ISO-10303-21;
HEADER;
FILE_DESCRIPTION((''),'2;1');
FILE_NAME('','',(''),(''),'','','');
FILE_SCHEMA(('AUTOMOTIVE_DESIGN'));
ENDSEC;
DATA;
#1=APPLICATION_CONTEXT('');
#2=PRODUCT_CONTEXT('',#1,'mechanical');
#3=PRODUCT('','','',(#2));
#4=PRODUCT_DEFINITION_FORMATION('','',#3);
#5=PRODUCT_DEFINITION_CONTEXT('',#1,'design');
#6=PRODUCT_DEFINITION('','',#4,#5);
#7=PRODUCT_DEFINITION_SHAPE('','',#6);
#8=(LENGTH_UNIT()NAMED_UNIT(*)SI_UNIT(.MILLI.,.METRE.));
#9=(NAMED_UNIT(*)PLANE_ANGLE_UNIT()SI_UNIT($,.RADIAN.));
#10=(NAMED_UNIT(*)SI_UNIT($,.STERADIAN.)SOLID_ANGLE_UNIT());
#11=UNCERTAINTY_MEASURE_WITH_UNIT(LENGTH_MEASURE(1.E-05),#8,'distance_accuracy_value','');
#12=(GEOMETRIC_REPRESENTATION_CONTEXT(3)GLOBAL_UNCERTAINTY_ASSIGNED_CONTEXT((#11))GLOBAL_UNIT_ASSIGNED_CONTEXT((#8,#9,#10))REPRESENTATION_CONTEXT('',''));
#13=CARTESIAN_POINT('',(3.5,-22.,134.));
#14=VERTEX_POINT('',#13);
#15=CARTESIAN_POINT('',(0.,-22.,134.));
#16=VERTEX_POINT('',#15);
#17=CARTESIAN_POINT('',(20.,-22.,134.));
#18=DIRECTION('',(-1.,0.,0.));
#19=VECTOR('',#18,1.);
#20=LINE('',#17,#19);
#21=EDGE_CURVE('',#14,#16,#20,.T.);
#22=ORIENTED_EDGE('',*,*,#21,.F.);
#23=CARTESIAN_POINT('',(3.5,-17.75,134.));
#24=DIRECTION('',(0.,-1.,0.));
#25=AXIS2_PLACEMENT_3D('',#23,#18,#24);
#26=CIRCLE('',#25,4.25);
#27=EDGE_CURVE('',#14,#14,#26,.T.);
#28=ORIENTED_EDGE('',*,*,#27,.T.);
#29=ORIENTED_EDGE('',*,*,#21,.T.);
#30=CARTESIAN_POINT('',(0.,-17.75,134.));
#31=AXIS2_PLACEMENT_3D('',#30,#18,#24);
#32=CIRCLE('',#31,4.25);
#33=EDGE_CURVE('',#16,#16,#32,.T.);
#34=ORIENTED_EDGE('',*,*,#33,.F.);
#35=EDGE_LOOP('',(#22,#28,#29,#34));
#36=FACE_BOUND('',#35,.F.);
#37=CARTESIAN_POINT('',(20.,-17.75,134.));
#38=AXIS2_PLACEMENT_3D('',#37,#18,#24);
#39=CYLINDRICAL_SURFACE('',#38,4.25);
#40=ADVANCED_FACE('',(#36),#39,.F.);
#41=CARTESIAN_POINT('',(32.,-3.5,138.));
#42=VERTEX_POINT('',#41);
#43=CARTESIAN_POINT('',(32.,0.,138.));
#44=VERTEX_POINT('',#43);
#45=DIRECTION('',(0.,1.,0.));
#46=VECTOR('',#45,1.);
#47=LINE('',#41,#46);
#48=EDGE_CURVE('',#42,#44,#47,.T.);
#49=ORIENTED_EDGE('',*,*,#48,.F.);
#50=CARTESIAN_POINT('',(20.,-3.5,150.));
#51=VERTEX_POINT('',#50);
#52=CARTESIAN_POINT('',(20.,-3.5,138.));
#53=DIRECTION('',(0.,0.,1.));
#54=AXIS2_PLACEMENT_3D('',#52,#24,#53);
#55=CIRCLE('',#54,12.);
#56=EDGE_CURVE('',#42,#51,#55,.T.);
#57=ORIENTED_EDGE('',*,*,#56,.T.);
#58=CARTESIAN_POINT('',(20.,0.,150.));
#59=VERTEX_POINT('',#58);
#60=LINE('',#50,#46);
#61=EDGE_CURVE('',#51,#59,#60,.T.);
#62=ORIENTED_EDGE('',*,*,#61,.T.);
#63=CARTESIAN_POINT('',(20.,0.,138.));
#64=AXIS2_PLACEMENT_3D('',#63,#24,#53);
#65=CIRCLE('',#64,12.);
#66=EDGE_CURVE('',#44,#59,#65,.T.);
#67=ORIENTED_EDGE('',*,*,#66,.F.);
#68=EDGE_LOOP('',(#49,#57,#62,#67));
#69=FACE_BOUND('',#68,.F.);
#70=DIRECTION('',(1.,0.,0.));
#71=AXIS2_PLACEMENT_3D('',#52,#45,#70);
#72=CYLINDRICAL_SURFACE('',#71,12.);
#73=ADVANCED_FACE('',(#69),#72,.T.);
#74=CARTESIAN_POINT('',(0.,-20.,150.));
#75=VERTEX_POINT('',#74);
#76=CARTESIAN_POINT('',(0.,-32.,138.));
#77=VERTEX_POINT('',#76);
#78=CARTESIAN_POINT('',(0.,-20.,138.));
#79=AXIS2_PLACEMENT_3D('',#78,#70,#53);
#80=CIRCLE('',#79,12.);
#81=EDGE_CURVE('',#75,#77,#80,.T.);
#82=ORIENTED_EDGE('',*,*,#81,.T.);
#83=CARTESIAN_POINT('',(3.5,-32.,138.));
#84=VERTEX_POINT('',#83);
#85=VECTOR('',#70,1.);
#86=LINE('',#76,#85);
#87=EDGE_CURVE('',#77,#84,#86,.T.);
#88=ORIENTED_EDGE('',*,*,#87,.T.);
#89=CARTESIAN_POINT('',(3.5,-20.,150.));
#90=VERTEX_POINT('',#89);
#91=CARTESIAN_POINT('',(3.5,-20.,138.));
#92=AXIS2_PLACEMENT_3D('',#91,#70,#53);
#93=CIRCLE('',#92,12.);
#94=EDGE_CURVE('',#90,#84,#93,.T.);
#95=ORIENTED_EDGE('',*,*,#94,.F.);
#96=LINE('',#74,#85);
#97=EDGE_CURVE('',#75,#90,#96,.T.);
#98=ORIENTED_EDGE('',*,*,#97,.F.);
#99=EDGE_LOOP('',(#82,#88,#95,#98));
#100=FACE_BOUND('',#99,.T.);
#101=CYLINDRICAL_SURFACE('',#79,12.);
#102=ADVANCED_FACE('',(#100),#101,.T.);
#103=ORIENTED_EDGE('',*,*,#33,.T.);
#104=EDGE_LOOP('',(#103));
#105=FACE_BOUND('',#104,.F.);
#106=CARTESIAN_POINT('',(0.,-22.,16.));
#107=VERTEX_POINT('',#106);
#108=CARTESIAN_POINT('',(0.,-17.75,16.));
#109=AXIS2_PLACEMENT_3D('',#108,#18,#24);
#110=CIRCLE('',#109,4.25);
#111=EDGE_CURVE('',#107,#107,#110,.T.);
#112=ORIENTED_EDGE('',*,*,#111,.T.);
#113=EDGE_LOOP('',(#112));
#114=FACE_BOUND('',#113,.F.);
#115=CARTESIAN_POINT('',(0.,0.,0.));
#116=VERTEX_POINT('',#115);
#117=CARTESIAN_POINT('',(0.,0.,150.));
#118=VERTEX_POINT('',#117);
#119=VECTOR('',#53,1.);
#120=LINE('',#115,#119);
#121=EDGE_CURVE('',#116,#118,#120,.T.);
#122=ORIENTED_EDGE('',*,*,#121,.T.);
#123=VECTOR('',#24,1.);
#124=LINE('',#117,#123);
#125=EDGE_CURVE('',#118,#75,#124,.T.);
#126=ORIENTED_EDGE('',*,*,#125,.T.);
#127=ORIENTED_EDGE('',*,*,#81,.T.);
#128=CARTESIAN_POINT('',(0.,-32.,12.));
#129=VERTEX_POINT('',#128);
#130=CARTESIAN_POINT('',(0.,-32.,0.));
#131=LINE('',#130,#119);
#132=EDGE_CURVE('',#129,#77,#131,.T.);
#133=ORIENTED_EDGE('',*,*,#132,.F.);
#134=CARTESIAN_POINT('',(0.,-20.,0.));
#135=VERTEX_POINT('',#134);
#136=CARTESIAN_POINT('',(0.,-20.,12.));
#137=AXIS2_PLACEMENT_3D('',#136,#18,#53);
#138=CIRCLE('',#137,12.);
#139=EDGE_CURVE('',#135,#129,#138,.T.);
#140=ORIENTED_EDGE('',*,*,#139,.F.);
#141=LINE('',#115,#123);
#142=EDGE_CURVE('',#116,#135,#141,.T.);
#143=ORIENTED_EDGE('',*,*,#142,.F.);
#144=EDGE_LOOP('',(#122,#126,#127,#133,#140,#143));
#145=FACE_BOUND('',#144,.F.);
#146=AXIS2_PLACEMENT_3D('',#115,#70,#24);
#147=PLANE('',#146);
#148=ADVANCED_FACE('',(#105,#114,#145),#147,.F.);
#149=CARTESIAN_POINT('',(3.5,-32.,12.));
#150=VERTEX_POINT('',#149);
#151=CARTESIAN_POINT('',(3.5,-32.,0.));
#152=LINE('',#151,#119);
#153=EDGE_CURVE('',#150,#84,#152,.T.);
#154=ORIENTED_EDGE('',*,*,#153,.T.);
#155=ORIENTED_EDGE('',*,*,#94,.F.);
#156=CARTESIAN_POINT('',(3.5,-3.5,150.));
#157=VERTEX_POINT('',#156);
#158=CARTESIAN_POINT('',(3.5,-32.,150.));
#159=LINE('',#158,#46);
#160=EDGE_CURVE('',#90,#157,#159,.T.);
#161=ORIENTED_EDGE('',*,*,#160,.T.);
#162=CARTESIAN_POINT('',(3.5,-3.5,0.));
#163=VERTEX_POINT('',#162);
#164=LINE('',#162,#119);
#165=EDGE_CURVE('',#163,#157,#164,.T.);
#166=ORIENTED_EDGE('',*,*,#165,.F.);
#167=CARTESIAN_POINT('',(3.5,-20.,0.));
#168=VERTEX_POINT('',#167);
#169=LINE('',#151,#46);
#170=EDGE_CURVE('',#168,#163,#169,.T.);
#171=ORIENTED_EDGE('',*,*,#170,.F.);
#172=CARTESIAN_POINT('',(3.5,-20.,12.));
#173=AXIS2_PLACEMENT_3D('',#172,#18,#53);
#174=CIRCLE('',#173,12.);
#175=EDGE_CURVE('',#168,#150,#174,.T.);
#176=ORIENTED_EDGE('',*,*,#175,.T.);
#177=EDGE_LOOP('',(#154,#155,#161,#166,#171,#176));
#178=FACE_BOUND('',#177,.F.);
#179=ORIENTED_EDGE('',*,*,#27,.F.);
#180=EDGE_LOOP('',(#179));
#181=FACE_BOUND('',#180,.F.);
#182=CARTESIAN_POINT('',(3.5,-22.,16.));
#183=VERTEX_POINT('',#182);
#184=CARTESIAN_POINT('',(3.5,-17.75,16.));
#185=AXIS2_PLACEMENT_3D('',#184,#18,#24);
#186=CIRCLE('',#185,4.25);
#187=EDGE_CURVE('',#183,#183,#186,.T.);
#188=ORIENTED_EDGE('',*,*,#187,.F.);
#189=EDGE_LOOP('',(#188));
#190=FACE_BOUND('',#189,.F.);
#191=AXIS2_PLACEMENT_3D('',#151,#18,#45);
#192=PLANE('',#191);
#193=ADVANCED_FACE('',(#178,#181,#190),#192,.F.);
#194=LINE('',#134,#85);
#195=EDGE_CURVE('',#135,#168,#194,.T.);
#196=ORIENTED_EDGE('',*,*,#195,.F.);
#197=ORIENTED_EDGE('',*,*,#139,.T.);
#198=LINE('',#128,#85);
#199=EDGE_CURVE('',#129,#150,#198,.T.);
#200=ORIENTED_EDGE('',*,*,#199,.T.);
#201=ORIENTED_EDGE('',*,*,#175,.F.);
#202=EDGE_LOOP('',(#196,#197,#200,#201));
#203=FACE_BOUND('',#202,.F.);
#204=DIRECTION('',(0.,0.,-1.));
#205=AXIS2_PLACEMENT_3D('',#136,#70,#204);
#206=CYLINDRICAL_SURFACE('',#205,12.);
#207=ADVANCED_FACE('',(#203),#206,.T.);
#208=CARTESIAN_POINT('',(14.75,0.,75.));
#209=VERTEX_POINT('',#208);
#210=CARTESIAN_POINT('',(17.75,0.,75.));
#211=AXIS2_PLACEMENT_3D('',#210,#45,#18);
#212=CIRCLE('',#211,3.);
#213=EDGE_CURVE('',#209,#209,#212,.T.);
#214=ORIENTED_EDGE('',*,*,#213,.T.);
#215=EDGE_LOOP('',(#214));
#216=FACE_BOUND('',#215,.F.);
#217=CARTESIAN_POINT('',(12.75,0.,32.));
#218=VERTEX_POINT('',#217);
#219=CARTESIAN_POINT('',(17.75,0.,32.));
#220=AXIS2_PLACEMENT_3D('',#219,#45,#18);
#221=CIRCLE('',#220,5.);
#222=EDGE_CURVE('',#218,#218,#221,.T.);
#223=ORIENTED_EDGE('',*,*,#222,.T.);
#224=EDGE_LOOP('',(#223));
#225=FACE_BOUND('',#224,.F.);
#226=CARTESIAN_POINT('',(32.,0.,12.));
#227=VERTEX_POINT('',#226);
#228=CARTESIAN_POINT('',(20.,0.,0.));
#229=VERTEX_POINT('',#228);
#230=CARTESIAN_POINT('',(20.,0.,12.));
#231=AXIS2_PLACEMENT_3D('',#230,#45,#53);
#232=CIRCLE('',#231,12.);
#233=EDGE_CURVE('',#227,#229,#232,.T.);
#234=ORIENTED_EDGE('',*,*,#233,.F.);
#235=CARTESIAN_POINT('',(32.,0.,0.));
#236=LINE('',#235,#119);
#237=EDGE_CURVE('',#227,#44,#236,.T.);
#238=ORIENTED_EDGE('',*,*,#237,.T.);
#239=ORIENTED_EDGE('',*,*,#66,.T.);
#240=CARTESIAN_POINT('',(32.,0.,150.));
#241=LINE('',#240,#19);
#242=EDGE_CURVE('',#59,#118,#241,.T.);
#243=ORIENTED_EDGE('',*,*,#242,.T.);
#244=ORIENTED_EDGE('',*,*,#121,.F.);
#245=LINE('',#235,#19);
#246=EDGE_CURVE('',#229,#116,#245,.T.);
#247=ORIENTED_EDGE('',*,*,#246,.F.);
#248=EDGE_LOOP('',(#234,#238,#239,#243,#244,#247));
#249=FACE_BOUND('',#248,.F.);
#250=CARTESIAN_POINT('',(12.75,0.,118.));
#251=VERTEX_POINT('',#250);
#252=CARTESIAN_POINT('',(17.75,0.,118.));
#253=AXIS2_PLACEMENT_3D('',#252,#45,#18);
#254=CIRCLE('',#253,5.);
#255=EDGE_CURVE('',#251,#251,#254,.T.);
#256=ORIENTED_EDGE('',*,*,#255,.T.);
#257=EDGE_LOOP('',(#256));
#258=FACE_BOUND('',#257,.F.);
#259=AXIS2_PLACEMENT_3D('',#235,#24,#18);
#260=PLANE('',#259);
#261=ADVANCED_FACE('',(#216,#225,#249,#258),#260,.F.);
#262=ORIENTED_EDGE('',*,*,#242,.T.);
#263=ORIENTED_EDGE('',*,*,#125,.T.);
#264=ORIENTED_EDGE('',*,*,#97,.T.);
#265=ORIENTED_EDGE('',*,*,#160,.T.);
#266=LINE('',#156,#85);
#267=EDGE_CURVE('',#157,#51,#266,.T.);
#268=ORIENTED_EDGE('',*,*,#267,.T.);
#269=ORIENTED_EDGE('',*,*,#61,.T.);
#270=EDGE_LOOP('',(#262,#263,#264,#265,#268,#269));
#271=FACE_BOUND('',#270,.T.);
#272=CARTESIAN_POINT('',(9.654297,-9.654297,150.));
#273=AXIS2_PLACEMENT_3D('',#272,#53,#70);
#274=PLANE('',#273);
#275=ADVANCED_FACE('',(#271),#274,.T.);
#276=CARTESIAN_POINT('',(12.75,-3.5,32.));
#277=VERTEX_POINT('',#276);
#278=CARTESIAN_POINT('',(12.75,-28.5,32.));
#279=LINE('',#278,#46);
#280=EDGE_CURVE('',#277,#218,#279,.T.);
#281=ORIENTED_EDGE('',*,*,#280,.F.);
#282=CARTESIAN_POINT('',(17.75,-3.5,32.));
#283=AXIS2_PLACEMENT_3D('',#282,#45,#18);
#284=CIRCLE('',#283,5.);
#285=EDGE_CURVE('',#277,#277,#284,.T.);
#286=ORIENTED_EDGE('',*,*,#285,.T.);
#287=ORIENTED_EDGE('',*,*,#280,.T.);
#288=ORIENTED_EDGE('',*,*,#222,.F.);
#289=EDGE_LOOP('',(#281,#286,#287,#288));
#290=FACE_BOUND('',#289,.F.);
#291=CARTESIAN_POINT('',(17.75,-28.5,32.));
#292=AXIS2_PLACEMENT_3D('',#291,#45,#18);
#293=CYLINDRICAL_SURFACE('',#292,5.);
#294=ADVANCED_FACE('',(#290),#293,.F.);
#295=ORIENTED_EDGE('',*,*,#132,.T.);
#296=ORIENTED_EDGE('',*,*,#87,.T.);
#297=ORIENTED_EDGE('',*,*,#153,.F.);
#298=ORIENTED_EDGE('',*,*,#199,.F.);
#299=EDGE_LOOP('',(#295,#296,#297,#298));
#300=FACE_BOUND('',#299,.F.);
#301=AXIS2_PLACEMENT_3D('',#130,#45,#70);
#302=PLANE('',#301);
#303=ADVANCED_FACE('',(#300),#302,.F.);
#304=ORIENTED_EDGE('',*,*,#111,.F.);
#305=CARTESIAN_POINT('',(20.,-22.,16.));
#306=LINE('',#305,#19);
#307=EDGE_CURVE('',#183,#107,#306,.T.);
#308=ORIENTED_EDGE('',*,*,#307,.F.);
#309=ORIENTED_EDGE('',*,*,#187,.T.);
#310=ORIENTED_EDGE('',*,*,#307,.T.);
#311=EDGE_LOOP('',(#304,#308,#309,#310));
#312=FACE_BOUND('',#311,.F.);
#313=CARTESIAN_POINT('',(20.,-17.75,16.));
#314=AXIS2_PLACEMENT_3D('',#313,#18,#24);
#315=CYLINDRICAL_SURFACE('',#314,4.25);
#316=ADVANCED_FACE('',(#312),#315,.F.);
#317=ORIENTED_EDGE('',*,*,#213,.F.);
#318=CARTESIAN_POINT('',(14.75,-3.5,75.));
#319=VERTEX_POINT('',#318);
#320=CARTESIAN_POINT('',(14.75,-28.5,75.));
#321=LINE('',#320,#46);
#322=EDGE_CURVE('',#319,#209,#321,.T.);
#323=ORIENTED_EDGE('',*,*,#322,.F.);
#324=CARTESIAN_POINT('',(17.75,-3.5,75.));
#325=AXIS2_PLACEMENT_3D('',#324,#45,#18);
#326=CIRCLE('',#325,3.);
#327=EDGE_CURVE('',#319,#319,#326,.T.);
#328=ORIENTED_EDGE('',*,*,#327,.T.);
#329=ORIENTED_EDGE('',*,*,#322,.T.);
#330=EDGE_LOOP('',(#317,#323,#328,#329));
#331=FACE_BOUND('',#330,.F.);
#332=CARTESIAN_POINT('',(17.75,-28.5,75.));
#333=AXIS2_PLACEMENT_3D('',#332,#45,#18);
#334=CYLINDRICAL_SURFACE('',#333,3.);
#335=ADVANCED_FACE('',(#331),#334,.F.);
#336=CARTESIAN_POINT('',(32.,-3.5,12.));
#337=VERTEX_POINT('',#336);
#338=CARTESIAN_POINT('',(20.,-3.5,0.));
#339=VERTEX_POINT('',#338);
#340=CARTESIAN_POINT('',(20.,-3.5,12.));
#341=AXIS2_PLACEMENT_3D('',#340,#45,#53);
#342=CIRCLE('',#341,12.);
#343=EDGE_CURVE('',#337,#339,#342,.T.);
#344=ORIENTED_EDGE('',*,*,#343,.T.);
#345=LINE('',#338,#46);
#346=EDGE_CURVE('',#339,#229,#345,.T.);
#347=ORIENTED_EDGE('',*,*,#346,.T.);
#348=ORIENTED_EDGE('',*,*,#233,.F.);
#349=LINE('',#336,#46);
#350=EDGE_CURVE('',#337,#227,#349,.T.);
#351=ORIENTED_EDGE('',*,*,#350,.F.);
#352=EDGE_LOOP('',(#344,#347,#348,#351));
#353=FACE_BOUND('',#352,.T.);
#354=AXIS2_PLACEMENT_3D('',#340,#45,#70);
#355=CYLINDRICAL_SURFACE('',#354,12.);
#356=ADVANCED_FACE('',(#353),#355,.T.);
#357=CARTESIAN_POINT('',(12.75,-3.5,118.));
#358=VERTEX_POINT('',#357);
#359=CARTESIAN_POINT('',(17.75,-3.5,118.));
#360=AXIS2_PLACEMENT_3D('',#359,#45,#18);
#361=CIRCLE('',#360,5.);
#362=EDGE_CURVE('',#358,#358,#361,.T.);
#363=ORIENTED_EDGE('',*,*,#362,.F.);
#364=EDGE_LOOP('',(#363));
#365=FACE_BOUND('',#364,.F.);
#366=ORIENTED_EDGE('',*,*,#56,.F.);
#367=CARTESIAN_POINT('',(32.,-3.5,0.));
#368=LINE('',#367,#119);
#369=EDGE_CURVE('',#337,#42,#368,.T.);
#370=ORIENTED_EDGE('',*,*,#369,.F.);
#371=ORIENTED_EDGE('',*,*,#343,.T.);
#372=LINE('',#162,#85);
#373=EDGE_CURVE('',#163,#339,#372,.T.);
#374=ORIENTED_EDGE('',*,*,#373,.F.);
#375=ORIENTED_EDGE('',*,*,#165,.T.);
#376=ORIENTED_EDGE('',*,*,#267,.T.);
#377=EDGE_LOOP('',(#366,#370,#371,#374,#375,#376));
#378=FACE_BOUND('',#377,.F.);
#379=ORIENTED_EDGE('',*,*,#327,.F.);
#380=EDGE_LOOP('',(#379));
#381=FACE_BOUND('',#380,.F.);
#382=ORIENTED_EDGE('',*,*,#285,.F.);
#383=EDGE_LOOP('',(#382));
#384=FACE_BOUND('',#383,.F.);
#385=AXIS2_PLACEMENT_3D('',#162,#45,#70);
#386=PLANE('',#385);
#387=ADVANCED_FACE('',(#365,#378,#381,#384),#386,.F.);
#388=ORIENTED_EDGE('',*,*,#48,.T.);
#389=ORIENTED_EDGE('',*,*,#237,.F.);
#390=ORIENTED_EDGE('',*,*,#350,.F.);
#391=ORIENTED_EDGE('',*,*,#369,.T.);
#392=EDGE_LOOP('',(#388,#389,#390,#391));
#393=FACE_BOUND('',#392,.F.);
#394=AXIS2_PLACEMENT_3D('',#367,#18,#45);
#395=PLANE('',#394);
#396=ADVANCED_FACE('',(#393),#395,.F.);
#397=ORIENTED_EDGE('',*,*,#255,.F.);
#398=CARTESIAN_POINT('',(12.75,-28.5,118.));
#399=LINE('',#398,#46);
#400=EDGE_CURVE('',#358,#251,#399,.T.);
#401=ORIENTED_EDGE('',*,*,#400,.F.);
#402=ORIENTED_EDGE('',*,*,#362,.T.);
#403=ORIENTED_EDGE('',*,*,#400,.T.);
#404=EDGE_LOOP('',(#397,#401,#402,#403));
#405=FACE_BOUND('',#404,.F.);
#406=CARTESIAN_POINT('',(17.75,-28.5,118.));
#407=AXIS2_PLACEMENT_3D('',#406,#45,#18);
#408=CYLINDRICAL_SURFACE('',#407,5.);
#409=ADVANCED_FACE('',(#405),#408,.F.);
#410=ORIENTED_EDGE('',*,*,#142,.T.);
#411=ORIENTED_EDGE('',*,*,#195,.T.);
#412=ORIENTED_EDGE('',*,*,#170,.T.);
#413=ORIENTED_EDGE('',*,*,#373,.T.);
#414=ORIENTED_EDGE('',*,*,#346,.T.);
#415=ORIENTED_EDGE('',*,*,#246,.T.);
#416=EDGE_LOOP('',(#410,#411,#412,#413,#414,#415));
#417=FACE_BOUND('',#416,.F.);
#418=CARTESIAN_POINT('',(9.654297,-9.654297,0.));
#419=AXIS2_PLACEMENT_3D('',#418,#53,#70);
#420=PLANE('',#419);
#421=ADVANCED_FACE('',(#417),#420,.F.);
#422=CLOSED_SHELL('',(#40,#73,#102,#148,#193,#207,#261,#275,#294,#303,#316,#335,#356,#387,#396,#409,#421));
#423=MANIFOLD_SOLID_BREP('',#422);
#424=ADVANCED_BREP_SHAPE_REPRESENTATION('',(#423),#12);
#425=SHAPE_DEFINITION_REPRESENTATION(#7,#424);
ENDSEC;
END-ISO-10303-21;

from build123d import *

# Parameters (mm, degrees)
F1_DEPTH = 150
F3_D     = 8.5
F3_DEPTH = 16.5
F3_TIP   = 2.5536576309
F5_D     = 10
F5_DEPTH = 25
F5_TIP   = 3.0043030951
F7_D     = 6
F7_DEPTH = 25
F7_TIP   = 1.8025818571
F8_R     = 12


with BuildPart() as f1:
    # F0 (on Top) → F1 (new body)
    with BuildSketch(Plane.XY):
        Polygon((32, -3.5), (32, 0), (0, 0), (0, -32), (3.5, -32), (3.5, -3.5), align=None)
    extrude(amount=F1_DEPTH)

    # F3
    with Locations(Plane.YZ.offset(3.5)):
        with Locations((-17.75, 134), (-17.75, 16)):
            Hole(F3_D / 2, depth=F3_DEPTH)
            with Locations((0, 0, -(F3_DEPTH + F3_TIP / 2))):  # 118° drill point
                Cone(0, F3_D / 2, F3_TIP, mode=Mode.SUBTRACT)

    # F5
    with Locations(Plane.XZ.offset(3.5)):
        with Locations((17.75, 118), (17.75, 32)):
            Hole(F5_D / 2, depth=F5_DEPTH)
            with Locations((0, 0, -(F5_DEPTH + F5_TIP / 2))):  # 118° drill point
                Cone(0, F5_D / 2, F5_TIP, mode=Mode.SUBTRACT)

    # F7
    with Locations(Plane.XZ.offset(3.5)):
        with Locations((17.75, 75)):
            Hole(F7_D / 2, depth=F7_DEPTH)
            with Locations((0, 0, -(F7_DEPTH + F7_TIP / 2))):  # 118° drill point
                Cone(0, F7_D / 2, F7_TIP, mode=Mode.SUBTRACT)

    # F8
    f8_edges = [f1.edges().sort_by_distance(p)[0] for p in [
        (1.75, -32, 150),
        (32, -1.75, 150),
        (32, -1.75, 0),
        (1.75, -32, 0),
    ]]
    fillet(f8_edges, radius=F8_R)


solid = f1.part
